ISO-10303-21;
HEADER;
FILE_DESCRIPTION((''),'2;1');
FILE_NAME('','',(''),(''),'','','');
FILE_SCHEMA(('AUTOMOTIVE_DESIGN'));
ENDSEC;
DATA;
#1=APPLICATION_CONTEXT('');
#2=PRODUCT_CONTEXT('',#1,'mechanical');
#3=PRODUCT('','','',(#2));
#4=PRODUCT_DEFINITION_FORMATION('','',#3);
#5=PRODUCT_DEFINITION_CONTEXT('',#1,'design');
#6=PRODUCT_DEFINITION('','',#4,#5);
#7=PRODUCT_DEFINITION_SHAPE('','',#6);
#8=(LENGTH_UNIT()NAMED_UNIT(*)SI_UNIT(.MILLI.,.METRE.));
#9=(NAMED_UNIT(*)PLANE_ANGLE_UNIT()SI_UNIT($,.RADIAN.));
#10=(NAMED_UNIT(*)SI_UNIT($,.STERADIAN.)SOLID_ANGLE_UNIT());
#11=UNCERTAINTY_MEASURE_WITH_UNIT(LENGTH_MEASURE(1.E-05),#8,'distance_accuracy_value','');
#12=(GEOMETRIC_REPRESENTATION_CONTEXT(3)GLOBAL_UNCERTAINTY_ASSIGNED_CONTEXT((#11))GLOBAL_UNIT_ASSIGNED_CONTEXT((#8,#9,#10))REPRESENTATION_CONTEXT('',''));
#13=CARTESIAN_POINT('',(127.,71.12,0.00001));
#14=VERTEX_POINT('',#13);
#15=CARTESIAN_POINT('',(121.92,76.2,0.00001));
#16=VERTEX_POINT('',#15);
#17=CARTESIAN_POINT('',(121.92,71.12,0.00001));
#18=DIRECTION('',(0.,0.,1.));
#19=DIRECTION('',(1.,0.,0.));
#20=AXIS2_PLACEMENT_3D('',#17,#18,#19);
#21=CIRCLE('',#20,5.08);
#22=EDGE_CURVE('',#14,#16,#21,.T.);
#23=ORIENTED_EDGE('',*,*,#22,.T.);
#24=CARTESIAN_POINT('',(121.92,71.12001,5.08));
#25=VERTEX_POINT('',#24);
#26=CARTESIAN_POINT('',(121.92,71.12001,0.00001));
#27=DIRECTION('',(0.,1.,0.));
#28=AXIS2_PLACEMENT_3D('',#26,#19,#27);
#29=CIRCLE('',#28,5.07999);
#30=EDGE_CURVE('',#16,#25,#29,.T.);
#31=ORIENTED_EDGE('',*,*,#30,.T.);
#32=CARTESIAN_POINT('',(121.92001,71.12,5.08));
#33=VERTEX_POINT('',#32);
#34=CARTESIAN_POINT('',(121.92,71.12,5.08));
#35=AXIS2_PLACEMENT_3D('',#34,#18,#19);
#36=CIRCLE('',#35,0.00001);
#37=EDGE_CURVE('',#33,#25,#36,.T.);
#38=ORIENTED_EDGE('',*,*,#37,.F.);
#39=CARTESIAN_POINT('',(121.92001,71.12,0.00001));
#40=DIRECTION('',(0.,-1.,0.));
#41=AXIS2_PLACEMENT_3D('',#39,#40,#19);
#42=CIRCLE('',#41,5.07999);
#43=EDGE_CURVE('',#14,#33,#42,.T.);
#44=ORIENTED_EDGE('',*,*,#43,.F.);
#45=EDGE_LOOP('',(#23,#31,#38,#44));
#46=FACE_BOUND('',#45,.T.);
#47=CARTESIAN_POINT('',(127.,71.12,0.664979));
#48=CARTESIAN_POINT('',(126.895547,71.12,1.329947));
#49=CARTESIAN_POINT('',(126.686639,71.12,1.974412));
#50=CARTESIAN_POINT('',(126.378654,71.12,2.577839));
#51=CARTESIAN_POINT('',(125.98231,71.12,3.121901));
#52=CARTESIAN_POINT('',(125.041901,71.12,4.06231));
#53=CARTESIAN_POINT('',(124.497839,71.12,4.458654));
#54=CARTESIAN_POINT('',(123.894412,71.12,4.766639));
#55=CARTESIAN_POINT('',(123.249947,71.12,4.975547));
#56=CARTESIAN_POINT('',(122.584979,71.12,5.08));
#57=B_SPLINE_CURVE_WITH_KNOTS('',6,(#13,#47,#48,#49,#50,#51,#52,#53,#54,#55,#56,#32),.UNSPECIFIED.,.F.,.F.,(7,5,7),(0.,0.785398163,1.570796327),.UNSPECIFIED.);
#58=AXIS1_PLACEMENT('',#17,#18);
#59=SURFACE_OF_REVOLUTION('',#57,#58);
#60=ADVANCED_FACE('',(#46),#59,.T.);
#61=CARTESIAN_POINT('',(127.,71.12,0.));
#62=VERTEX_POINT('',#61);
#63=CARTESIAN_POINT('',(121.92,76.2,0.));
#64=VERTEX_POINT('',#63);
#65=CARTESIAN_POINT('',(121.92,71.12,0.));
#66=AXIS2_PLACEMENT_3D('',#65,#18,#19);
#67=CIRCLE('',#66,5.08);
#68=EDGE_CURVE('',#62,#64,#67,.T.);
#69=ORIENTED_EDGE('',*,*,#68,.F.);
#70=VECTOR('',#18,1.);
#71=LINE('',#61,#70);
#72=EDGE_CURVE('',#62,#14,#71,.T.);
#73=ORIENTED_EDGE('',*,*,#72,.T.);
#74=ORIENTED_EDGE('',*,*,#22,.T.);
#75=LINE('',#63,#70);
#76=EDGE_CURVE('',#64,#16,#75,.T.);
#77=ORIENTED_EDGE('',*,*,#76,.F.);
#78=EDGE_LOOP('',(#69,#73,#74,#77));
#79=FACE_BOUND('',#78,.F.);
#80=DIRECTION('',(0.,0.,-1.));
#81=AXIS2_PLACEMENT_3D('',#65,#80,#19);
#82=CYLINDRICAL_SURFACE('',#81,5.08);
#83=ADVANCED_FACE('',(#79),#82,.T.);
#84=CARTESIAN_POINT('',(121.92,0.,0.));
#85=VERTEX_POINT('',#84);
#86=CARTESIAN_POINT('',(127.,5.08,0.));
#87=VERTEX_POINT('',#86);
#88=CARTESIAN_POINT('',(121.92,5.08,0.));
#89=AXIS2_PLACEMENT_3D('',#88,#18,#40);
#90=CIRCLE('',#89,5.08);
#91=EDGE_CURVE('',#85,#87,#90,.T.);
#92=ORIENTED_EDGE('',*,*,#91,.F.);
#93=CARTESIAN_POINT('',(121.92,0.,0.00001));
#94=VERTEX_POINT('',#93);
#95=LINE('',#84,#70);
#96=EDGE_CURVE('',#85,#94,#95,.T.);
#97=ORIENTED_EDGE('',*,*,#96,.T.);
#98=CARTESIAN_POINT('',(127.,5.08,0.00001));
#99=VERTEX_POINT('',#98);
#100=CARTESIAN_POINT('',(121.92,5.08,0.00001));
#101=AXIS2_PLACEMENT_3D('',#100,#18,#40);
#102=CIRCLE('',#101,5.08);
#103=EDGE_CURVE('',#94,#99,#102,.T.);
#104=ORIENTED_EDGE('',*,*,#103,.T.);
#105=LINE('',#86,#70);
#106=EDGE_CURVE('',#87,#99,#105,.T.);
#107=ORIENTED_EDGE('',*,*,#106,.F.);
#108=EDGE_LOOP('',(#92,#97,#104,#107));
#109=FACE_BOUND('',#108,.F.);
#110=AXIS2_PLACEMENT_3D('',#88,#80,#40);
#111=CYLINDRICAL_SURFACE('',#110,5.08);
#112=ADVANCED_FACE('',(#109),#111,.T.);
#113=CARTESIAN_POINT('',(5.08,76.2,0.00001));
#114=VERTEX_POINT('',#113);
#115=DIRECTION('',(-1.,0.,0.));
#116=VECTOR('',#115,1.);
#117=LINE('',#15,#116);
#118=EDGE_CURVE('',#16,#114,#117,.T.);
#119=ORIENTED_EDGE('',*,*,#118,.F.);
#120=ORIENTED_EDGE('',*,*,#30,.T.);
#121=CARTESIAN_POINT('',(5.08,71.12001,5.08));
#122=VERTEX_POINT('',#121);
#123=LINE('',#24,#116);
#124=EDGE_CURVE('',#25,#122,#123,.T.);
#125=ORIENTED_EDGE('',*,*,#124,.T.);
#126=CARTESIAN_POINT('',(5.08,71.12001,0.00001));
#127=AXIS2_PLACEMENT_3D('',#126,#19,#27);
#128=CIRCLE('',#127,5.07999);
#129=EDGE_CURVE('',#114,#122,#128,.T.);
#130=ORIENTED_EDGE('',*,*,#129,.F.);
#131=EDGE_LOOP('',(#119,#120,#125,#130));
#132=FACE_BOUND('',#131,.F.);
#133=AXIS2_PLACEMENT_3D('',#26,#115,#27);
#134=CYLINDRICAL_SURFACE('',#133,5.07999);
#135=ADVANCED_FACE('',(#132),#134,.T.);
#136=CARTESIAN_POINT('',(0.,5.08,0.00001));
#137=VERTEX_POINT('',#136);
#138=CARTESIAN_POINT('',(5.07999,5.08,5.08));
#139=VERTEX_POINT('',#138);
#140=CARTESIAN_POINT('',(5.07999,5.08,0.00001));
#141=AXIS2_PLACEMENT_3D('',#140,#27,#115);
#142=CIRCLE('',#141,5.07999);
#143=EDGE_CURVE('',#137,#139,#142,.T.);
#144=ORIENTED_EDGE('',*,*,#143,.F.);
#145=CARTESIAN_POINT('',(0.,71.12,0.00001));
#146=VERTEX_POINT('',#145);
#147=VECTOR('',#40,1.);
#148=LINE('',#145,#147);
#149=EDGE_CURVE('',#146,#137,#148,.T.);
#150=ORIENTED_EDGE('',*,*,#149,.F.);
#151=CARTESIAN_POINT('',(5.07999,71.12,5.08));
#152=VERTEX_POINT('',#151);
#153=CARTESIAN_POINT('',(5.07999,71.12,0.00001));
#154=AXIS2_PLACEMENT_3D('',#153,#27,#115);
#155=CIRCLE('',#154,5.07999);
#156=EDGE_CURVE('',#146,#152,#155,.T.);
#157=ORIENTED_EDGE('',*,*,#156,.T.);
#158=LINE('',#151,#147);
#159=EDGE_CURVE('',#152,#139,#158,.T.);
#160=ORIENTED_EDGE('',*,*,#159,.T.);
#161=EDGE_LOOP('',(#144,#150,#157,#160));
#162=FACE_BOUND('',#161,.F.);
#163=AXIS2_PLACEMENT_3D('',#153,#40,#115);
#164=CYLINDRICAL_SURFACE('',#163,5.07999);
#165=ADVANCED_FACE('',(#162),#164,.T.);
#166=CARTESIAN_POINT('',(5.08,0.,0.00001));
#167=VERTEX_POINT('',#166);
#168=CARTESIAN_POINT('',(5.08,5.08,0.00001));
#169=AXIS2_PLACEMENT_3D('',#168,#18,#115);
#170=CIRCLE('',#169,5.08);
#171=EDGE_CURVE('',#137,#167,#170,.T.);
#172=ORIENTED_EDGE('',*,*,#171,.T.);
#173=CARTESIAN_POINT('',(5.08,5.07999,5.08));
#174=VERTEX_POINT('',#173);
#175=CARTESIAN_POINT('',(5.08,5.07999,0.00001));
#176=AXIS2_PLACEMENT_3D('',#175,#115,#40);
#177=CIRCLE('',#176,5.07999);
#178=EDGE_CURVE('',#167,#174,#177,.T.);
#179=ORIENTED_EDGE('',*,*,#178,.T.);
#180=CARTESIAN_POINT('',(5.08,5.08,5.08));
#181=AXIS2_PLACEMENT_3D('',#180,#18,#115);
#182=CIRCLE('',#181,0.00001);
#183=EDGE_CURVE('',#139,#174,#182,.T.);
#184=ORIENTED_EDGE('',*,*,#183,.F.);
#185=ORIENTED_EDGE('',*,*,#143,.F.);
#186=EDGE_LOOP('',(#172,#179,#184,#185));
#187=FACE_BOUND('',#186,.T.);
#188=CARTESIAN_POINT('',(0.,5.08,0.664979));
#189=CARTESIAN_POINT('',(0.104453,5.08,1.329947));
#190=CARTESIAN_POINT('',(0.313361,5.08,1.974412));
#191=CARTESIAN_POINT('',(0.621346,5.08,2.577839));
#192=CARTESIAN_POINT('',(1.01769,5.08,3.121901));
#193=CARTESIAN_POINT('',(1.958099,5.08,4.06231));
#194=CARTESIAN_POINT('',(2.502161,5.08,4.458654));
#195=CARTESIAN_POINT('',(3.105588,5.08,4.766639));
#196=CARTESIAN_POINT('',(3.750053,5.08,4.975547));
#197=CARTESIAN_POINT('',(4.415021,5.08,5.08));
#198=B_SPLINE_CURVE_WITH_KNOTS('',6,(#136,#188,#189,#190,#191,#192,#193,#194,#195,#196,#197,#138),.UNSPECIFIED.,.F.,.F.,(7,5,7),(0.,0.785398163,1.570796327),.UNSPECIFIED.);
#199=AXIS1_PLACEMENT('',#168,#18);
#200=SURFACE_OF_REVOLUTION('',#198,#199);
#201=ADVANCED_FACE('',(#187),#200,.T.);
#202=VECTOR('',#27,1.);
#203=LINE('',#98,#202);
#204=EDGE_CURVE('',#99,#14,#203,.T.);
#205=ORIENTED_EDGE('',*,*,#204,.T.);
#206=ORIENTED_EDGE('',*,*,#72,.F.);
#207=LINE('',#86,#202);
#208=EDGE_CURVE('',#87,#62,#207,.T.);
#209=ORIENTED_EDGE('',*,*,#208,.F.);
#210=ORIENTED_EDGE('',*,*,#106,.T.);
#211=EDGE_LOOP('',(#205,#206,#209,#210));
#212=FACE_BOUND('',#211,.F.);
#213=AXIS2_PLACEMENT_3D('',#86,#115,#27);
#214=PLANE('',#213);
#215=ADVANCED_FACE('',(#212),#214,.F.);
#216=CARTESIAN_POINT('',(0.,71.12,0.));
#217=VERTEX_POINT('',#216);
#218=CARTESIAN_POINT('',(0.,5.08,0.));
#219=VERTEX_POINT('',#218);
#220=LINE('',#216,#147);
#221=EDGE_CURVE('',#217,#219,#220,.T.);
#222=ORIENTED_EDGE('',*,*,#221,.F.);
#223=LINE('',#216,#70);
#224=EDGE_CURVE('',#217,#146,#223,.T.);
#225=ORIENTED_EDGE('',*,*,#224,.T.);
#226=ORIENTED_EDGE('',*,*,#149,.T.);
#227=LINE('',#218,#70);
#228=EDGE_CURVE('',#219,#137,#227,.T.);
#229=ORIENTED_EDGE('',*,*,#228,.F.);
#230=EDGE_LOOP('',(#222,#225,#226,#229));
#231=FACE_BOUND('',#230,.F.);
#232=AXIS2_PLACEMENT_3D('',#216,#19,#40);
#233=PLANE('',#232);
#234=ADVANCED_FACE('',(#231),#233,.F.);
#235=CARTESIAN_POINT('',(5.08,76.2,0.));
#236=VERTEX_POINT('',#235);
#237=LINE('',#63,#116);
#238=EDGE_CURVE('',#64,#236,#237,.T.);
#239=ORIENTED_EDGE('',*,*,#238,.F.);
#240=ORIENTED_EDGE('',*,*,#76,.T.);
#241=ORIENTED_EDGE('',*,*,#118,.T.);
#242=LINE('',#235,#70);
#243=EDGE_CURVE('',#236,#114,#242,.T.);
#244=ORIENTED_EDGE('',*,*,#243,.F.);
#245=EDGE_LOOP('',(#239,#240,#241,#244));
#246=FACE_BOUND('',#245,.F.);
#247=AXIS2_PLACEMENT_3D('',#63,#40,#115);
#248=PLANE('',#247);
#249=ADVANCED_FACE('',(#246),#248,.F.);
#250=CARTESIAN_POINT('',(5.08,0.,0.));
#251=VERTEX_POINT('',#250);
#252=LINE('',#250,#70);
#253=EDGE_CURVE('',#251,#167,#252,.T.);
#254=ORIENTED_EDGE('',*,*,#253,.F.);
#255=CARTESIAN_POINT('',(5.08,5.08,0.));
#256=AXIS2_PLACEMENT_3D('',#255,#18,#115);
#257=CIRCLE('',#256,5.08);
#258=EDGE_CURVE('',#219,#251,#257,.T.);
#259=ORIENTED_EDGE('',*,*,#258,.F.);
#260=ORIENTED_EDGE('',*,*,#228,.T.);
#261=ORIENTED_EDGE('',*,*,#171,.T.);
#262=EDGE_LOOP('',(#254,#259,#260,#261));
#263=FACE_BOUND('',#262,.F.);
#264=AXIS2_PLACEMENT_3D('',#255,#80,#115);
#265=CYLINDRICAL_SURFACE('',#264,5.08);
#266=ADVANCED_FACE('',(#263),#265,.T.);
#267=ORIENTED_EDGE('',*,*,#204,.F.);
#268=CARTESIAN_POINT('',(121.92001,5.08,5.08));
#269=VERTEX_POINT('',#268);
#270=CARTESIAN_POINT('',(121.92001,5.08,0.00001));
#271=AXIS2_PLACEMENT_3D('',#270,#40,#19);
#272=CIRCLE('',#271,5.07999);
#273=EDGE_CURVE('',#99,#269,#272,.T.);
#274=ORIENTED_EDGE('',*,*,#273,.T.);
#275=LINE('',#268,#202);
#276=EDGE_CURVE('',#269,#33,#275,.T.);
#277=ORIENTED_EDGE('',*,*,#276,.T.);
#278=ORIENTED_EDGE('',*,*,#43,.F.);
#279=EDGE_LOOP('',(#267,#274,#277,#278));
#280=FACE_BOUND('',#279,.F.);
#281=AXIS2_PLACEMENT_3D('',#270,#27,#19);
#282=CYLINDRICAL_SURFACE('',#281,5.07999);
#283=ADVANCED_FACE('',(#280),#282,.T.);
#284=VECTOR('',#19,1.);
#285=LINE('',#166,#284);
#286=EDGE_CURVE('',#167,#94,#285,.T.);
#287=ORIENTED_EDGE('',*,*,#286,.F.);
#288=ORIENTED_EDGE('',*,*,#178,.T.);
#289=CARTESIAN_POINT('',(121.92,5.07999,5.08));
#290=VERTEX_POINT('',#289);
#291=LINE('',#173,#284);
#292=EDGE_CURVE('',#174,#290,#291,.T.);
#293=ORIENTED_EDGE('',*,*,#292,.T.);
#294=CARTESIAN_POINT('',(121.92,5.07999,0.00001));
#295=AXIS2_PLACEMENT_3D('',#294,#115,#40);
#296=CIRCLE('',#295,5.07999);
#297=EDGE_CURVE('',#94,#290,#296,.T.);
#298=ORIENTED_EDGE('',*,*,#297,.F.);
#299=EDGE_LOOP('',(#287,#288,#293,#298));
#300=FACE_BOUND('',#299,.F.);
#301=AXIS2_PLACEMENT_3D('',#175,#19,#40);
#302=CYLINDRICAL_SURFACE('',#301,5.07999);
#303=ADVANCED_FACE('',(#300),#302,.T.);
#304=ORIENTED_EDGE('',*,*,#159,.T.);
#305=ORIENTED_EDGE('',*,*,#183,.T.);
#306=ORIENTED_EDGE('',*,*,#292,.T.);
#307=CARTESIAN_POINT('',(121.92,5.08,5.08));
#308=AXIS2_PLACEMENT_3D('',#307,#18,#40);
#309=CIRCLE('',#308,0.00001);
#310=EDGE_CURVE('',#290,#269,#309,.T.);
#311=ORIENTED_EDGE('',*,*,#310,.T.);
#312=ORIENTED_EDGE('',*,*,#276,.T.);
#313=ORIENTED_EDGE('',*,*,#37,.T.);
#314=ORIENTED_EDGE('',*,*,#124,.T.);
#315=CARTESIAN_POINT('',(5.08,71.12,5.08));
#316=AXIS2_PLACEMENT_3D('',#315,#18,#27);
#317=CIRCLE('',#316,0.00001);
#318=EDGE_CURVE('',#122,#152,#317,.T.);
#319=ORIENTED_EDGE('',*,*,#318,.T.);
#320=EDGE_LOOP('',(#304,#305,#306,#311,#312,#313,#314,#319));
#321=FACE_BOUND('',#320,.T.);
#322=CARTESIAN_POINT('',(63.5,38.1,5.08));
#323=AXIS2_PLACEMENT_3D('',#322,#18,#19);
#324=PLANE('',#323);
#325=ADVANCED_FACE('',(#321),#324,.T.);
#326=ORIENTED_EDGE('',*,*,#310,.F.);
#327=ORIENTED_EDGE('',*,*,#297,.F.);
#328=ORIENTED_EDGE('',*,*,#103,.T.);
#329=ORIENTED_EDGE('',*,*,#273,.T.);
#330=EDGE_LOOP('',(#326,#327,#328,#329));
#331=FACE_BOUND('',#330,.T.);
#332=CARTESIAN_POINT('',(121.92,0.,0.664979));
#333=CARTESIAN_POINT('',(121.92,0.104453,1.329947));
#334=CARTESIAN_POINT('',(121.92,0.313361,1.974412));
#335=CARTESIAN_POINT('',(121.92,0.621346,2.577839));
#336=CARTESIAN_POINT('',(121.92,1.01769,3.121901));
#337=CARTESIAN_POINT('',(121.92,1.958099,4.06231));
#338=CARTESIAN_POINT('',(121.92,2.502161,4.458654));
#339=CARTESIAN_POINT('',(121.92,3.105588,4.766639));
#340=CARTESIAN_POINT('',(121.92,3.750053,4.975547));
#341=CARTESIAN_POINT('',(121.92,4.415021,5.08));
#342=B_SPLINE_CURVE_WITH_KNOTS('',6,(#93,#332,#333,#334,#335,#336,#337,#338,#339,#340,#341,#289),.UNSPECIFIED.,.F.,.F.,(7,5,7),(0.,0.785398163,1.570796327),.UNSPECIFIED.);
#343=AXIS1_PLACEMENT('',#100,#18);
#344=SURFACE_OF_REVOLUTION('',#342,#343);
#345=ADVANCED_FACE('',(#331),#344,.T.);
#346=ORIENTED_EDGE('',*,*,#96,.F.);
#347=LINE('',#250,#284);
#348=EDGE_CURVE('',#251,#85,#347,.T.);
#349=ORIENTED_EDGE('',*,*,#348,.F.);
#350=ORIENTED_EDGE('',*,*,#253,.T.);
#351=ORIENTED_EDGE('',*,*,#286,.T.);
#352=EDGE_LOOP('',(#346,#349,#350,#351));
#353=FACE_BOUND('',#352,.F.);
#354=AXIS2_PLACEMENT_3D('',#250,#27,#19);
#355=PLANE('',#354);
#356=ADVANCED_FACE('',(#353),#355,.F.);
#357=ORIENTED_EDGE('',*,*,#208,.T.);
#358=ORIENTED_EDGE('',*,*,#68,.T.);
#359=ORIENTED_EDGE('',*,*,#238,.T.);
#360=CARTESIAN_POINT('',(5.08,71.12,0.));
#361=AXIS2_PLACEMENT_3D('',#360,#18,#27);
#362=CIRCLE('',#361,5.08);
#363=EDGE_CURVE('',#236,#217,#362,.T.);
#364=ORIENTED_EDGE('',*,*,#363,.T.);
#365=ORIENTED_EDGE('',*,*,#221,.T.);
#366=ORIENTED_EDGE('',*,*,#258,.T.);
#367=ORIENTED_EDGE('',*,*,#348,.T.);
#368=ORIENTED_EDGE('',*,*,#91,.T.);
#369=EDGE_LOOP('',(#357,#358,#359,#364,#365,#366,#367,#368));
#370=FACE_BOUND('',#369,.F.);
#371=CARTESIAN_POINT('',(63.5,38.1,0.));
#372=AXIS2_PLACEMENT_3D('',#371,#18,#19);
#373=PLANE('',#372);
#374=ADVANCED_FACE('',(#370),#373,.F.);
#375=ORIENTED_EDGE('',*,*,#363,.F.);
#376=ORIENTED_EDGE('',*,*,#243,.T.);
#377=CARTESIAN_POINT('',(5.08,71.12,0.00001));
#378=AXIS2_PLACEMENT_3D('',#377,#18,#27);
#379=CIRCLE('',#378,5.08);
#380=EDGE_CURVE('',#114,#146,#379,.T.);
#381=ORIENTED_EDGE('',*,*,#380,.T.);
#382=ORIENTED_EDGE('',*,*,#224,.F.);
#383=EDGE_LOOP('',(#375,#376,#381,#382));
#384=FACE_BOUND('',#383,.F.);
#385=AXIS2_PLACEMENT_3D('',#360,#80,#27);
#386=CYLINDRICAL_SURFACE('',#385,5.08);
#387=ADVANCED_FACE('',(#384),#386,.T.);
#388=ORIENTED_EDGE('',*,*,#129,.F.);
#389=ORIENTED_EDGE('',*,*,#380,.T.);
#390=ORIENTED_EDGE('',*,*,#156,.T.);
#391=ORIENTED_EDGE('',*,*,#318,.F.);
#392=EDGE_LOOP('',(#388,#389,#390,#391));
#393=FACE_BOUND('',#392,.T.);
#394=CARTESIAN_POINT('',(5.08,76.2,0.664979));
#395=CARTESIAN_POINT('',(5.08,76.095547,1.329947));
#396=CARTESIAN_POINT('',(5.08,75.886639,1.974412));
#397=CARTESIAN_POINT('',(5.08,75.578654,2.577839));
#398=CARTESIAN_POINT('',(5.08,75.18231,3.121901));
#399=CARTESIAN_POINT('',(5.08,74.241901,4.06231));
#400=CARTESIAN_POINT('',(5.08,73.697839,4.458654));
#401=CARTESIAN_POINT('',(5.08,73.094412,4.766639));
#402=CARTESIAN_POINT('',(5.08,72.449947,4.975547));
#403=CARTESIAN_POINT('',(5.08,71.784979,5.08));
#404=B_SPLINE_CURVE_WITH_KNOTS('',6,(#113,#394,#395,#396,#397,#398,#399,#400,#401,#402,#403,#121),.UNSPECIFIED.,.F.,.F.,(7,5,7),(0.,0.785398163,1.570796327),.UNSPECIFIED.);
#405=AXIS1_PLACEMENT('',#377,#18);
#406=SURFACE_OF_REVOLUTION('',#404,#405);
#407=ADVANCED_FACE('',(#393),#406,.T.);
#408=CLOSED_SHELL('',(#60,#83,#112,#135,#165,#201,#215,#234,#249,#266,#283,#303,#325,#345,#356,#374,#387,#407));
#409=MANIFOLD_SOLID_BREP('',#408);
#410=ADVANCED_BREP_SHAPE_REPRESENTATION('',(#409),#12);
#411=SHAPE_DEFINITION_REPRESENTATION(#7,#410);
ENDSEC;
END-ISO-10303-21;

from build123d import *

# Parameters (mm, degrees)
F1_DEPTH = 5.08
F2_R     = 5.07999


# Not quite as in the source:
# - a fillet or chamfer is up to 0.001 mm smaller than in the source, because OpenCascade refuses the exact size


with BuildPart() as f1:
    # F0 (on Top) → F1 (new body)
    with BuildSketch(Plane.XY):
        with BuildLine():
            Line((121.92, 76.2), (5.08, 76.2))
            ThreePointArc((5.08, 76.2), (1.4878975516, 74.7121024484), (0, 71.12))
            Line((0, 71.12), (0, 5.08))
            ThreePointArc((0, 5.08), (1.4878975516, 1.4878975516), (5.08, 0))
            Line((5.08, 0), (121.92, 0))
            ThreePointArc((121.92, 0), (125.5121024484, 1.4878975516), (127, 5.08))
            Line((127, 5.08), (127, 71.12))
            ThreePointArc((127, 71.12), (125.5121024484, 74.7121024484), (121.92, 76.2))
        make_face()
    extrude(amount=F1_DEPTH)

    # F2 (radius 5.08 in the source; OpenCascade refuses exactly that, so slightly less here)
    f2_edges = [f1.edges().sort_by_distance(p)[0] for p in [
        (63.5, 76.2, 5.08),
        (1.487898, 74.712102, 5.08),
        (0, 38.1, 5.08),
        (1.487898, 1.487898, 5.08),
        (63.5, 0, 5.08),
        (125.512102, 1.487898, 5.08),
        (127, 38.1, 5.08),
        (125.512102, 74.712102, 5.08),
    ]]
    fillet(f2_edges, radius=F2_R)


solid = f1.part
